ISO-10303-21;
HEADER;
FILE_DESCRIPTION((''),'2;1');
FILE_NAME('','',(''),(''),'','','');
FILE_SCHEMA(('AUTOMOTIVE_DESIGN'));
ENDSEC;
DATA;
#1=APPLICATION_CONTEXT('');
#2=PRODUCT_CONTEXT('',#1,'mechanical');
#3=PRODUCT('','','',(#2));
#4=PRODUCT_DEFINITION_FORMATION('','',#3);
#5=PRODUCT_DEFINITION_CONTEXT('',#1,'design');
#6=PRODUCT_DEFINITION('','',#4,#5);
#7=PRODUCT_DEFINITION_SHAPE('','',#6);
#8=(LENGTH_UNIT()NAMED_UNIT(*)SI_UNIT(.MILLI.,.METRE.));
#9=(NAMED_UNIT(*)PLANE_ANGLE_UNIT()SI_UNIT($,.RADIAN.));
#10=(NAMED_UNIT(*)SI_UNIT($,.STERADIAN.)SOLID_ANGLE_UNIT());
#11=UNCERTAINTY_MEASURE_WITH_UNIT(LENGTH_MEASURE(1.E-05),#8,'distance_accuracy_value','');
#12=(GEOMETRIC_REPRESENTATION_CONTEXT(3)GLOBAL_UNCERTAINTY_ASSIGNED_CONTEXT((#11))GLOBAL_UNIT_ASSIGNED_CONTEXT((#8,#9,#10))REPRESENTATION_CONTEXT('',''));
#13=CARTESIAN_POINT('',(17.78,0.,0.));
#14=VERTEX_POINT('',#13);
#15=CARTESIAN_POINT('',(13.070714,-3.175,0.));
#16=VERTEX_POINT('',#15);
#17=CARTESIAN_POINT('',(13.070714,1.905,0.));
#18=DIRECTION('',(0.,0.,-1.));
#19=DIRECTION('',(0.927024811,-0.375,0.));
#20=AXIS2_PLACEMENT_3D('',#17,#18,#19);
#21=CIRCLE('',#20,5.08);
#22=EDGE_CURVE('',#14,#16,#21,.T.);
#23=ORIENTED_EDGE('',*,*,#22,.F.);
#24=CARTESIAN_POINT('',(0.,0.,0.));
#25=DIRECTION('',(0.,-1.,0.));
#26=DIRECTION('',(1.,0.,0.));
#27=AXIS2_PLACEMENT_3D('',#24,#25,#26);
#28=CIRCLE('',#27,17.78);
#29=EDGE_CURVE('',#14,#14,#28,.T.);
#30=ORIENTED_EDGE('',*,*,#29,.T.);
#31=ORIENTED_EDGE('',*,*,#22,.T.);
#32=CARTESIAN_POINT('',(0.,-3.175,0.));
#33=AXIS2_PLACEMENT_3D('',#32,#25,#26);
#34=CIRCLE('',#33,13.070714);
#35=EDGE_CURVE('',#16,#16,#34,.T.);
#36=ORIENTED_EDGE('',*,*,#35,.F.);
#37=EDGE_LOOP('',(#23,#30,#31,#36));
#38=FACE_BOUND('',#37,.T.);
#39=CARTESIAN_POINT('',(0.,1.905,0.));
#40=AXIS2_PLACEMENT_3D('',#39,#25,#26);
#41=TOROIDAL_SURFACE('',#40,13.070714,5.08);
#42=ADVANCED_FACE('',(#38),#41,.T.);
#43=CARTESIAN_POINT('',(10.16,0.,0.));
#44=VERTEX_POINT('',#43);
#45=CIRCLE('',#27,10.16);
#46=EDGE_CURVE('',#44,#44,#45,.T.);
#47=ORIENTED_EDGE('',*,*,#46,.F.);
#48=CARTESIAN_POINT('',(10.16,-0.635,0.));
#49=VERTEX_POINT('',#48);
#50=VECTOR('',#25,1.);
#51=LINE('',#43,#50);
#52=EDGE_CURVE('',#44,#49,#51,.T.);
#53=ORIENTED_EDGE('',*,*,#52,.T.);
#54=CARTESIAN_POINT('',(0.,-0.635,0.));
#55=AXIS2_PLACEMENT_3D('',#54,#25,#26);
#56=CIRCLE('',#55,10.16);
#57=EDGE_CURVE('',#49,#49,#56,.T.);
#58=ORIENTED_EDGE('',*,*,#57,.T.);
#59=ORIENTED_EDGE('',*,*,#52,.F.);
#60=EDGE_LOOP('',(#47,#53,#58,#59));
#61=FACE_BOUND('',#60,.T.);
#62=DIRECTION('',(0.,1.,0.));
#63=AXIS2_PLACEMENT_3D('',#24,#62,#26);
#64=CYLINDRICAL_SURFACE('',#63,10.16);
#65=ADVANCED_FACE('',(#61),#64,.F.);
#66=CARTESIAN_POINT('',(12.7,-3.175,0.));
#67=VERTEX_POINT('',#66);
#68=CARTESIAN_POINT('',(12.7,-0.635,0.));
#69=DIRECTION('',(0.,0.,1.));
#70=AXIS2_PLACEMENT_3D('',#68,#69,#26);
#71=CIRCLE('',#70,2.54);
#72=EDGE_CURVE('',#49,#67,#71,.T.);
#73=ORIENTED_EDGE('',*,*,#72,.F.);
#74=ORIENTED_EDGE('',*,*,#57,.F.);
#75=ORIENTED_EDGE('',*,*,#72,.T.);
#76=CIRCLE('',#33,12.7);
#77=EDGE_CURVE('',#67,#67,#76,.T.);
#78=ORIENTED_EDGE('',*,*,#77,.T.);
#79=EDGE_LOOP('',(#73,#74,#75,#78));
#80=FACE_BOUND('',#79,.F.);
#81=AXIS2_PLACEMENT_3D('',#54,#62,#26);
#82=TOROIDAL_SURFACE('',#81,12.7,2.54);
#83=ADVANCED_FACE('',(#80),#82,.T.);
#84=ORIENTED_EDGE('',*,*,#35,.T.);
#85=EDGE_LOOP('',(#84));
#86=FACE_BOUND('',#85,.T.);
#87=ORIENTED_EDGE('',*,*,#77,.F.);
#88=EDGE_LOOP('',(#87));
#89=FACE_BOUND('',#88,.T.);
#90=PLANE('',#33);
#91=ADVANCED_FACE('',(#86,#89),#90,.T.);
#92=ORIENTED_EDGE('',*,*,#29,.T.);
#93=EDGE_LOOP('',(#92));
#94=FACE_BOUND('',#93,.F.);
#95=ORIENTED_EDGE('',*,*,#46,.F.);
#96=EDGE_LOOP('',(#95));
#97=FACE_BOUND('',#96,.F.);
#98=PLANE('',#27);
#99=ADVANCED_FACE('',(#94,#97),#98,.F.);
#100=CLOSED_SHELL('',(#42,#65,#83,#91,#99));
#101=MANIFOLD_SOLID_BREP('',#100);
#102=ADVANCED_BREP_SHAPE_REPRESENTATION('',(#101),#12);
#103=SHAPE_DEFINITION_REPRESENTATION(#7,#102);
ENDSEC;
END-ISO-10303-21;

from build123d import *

# Parameters (mm, degrees)
F0_R     = 17.78
F0_R_2   = 10.16
F1_DEPTH = 3.175
F3_R     = 2.54


# Not quite as in the source:
# - a fillet or chamfer that OpenCascade refuses, or shapes differently, is made with other operations: its cross-section is extruded or revolved along the edge and cut away or added


with BuildPart() as f1:
    # F0 (on Front) → F1 (new body)
    with BuildSketch(Plane.XZ):
        Circle(F0_R)
        Circle(F0_R_2, mode=Mode.SUBTRACT)
    extrude(amount=F1_DEPTH)

    # F2: fillet of radius 5.08 on 1 edges, made by hand

    # F2_s1 → F2_t2 (revolve, cut)
    with BuildSketch(Plane.XY):
        with BuildLine():
            ThreePointArc((17.78, 0), (15.9105202921, -2.3071134838), (13.0707139607, -3.175))
            Line((13.0707139607, -3.175), (17.78, -3.175))
            Line((17.78, -3.175), (17.78, 0))
        make_face()
    revolve(axis=Axis((0, -3.175, 0), (0, -1, 0)), mode=Mode.SUBTRACT)

    # F3
    f3_edges = [f1.edges().sort_by_distance(p)[0] for p in [
        (-10.16, -3.175, 0),
    ]]
    fillet(f3_edges, radius=F3_R)


solid = f1.part
